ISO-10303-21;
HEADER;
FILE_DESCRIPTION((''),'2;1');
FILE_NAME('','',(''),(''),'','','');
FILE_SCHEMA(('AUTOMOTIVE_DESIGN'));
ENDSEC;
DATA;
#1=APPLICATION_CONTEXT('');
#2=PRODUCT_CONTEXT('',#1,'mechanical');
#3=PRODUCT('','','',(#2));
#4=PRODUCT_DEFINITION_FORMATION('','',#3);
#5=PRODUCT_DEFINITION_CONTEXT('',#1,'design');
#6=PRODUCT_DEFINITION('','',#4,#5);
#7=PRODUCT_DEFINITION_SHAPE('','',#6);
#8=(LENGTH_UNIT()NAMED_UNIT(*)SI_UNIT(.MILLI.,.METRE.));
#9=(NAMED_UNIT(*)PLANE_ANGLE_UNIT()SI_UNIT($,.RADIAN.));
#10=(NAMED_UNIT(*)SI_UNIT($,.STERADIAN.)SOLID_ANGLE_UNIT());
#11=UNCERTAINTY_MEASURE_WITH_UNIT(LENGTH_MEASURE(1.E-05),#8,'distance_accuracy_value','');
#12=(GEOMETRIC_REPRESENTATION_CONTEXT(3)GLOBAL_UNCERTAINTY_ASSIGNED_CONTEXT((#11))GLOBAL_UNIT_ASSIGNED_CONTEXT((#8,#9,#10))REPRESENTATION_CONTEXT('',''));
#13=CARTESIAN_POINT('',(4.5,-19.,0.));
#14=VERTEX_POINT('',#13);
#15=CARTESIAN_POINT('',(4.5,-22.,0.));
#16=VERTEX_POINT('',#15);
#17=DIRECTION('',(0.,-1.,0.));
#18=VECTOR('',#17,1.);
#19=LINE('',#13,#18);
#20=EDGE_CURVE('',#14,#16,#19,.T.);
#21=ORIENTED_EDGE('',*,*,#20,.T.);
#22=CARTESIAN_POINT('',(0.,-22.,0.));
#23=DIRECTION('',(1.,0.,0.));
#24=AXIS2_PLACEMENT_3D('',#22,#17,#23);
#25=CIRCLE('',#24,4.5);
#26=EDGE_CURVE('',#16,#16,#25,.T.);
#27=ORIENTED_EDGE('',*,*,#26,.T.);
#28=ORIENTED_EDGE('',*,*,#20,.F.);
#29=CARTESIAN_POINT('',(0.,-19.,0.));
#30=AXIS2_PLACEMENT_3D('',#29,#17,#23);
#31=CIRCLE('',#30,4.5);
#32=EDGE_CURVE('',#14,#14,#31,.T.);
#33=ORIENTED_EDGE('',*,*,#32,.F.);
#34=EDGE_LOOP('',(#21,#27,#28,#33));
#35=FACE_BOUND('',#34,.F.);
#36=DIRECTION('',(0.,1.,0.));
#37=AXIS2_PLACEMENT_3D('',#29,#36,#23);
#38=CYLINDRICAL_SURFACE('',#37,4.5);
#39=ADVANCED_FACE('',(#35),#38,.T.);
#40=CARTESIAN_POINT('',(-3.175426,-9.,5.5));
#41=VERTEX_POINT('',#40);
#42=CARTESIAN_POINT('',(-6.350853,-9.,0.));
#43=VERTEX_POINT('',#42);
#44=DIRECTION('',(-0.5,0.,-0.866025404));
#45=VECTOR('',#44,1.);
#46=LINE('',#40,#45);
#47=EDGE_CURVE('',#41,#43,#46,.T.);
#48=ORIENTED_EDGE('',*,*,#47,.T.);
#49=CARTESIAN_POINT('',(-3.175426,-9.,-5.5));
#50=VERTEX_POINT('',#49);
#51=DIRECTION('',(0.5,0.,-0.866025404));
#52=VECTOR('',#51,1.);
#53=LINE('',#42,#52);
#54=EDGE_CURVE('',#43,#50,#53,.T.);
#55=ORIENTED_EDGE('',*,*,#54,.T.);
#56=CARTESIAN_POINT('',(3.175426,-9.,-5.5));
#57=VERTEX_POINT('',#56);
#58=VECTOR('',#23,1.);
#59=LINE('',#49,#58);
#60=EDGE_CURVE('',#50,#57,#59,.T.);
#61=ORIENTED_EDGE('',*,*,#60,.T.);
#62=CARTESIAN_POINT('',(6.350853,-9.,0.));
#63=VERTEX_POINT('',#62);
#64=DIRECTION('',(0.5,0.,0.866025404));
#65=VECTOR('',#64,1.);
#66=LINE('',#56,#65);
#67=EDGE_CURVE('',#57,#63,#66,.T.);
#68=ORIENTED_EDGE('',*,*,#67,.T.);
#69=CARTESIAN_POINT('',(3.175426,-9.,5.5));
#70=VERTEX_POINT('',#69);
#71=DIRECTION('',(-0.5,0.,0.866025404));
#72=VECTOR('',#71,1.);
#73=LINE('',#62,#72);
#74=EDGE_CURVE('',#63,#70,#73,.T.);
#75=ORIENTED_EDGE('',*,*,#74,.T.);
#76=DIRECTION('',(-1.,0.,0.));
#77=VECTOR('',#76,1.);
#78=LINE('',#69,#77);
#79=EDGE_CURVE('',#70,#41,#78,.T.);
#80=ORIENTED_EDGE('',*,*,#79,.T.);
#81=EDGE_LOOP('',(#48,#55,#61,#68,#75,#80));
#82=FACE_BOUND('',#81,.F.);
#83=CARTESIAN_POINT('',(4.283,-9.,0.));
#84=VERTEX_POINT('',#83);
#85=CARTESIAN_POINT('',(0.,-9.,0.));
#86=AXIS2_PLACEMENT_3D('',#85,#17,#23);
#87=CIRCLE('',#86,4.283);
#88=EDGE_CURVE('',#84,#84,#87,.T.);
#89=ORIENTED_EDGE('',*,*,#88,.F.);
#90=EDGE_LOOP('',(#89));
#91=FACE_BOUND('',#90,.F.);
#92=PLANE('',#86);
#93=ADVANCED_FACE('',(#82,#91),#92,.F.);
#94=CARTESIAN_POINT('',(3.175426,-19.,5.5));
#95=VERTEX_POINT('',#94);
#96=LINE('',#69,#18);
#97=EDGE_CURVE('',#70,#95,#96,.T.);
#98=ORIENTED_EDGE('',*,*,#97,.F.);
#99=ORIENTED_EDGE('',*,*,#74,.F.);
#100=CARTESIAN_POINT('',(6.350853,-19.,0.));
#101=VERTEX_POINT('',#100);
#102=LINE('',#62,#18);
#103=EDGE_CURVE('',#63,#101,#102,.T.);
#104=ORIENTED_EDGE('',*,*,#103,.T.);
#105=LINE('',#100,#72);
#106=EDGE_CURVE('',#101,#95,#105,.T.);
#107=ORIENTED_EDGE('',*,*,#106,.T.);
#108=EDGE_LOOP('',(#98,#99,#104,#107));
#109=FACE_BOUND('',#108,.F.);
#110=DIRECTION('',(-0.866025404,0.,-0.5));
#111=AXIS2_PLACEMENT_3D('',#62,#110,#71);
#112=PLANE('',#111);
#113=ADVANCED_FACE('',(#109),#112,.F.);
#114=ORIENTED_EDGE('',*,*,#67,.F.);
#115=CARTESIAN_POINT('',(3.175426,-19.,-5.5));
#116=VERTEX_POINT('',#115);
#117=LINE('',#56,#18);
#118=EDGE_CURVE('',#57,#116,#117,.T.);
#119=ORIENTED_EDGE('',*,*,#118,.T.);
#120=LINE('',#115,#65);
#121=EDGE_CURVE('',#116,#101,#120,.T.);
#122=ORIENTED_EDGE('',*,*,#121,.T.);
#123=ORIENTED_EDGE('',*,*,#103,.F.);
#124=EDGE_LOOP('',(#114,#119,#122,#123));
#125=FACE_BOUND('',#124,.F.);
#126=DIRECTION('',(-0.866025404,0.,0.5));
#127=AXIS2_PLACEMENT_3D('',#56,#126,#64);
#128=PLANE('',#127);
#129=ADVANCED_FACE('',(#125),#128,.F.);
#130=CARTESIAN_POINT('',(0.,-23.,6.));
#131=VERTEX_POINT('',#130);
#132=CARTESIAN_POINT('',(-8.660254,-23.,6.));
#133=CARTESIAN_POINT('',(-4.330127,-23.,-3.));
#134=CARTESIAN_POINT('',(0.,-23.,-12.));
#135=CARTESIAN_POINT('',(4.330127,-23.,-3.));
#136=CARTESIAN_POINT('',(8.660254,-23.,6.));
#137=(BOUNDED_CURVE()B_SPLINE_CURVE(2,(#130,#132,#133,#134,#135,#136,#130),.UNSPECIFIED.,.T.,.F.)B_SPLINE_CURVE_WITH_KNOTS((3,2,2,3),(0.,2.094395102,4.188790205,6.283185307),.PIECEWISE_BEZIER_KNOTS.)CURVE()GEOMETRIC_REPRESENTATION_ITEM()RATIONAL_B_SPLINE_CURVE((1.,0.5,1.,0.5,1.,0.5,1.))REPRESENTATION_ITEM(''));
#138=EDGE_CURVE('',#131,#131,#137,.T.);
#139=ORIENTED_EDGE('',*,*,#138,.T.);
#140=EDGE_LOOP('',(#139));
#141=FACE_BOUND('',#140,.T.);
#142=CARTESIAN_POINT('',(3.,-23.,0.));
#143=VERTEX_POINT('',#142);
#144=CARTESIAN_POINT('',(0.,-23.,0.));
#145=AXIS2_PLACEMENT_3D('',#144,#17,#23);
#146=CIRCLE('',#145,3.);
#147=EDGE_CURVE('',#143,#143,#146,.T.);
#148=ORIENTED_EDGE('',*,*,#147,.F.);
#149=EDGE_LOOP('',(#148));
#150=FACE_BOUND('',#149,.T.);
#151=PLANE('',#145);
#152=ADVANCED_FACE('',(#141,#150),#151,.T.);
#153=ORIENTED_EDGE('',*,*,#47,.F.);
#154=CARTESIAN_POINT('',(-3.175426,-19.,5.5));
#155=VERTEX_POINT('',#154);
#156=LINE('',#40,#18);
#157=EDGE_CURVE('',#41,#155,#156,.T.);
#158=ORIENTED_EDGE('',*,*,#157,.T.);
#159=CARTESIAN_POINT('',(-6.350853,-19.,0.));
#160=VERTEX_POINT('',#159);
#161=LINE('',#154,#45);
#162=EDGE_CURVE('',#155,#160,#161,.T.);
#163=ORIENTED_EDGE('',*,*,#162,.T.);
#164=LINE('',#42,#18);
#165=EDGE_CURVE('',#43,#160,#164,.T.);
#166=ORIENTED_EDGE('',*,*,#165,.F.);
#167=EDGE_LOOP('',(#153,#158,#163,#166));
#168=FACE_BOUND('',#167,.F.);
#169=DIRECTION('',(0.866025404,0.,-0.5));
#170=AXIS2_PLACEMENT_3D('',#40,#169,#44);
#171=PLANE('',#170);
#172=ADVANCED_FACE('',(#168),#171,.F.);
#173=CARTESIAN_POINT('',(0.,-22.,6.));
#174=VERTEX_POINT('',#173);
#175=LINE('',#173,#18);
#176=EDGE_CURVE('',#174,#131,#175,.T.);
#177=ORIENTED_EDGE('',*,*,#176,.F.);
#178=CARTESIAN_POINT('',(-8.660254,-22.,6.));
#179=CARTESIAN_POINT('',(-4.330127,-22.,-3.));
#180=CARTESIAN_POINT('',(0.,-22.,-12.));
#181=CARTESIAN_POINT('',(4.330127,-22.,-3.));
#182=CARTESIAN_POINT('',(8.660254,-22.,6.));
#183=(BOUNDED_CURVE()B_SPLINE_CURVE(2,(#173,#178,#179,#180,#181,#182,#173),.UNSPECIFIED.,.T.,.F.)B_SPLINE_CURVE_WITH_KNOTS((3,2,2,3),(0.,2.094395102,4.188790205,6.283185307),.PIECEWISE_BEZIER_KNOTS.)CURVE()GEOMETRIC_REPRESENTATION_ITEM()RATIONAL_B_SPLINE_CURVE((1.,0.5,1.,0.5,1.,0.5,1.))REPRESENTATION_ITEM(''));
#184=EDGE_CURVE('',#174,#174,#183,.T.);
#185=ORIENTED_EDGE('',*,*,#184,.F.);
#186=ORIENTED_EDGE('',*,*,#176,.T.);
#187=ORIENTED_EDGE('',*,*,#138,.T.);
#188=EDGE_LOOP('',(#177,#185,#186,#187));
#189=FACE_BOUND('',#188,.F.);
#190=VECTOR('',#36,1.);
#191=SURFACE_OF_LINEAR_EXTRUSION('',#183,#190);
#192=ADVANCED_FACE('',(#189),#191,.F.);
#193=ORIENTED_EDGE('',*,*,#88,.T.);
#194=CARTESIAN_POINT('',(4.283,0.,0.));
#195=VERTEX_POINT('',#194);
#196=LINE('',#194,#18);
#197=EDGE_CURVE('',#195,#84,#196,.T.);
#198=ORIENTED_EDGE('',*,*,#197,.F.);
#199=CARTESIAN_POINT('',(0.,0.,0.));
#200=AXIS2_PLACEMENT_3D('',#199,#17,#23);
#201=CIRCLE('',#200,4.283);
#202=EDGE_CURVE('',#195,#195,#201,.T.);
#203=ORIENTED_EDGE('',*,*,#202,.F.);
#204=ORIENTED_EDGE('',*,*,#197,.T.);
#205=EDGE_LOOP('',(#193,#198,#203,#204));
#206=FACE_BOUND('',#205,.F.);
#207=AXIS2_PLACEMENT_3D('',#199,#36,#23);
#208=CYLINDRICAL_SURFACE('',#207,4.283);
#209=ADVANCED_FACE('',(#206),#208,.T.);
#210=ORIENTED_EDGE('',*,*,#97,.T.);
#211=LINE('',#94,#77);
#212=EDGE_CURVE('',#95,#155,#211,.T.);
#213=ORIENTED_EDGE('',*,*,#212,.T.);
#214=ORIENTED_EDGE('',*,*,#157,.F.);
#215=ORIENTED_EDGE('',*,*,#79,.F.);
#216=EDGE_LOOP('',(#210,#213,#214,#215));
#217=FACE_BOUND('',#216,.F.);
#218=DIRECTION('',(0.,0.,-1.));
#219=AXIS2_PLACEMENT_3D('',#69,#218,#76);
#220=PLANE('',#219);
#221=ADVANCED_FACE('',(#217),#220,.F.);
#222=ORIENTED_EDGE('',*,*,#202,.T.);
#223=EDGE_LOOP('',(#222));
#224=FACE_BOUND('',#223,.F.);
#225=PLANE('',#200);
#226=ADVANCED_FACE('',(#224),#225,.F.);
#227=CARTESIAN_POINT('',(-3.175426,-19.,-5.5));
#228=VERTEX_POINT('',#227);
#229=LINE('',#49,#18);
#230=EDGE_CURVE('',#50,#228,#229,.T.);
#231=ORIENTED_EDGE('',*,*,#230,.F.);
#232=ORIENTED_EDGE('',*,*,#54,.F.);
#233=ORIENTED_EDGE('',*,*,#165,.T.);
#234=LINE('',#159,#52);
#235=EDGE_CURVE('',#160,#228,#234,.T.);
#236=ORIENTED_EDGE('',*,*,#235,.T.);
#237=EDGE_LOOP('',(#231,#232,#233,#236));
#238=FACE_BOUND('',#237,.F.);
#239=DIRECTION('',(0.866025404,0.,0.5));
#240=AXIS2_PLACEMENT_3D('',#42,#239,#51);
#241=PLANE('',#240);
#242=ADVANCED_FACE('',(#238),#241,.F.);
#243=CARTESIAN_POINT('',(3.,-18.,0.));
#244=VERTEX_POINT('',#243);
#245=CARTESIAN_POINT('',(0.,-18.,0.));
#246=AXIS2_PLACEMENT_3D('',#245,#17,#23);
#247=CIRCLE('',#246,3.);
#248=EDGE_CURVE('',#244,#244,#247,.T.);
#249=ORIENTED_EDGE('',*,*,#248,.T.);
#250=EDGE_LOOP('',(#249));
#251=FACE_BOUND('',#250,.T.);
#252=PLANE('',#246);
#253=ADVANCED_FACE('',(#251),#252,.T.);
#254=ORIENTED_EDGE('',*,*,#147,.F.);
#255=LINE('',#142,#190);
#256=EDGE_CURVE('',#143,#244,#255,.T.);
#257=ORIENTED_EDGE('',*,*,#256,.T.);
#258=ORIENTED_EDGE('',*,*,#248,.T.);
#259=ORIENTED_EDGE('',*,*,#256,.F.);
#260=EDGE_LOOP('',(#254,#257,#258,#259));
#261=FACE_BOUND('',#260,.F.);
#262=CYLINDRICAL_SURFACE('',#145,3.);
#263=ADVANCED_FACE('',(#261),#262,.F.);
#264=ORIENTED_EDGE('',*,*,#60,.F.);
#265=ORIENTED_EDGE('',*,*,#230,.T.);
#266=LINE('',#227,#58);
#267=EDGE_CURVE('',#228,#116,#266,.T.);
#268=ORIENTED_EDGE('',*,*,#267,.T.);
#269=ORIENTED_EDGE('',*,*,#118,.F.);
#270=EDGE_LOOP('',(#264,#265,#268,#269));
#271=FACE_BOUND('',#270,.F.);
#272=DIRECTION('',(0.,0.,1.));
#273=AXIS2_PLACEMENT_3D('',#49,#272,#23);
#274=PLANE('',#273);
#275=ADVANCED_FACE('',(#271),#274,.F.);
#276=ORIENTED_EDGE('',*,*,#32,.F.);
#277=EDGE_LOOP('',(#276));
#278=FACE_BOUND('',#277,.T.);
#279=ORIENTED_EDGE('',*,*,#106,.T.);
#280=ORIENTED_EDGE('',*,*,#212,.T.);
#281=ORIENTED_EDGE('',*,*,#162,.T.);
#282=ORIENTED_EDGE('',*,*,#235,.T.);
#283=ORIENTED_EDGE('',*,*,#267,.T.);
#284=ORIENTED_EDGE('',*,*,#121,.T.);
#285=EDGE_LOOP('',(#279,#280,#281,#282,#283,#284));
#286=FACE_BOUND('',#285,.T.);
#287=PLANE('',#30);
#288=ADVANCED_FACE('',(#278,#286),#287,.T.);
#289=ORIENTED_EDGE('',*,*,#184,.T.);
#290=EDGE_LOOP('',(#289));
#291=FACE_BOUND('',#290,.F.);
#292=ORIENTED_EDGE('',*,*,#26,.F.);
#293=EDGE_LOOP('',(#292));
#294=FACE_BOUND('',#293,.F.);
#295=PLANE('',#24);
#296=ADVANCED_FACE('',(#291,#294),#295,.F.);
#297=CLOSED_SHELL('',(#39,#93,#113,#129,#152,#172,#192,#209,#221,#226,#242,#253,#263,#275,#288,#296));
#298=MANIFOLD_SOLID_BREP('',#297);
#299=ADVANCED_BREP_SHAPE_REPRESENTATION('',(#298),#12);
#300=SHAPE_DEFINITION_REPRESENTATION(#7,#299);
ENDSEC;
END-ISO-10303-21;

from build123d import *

# Parameters (mm, degrees)
F0_R     = 4.283
F1_DEPTH = 9
F2_R     = 4.283
F3_DEPTH = 10
F4_R     = 4.5
F5_DEPTH = 3
F7_DEPTH = 1
F8_R     = 3
F9_DEPTH = 5


# Not quite as in the source:
# - a feature names something its author has since deleted; it is built from what else it names


with BuildPart() as f1:
    # F0 (on Front) → F1 (new body)
    with BuildSketch(Plane.XZ):
        Circle(F0_R)
    extrude(amount=F1_DEPTH)

    # F2 (on face) → F3 (join)
    with BuildSketch(Plane.XZ.offset(9)):
        Polygon((3.1754264805, 5.5), (-3.1754264805, 5.5), (-6.3508529611, 0), (-3.1754264805, -5.5), (3.1754264805, -5.5), (6.3508529611, 0), align=None)
        Circle(F2_R, mode=Mode.SUBTRACT)
        Circle(F2_R)
    extrude(amount=F3_DEPTH)

    # F4 (on face) → F5 (join)
    with BuildSketch(Plane.XZ.offset(19)):
        Circle(F4_R)
    extrude(amount=F5_DEPTH)

    # F6 (on face) → F7 (join)
    with BuildSketch(Plane.XZ.offset(22)):
        with BuildLine():
            add(Edge.make_bspline(
                [(0, 6), (-8.6602540378, 6), (-4.3301270189, -3), (0, -12), (4.3301270189, -3), (8.6602540378, 6), (0, 6)],
                knots=[0, 0, 0, 2.0943951024, 2.0943951024, 4.1887902048, 4.1887902048, 6.2831853072, 6.2831853072, 6.2831853072], degree=2, weights=[1, 0.5, 1, 0.5, 1, 0.5, 1]))
        make_face()
    extrude(amount=F7_DEPTH)

    # F8 (on face) → F9 (cut)
    with BuildSketch(Plane.XZ.offset(23)):
        Circle(F8_R)
    extrude(amount=-F9_DEPTH, mode=Mode.SUBTRACT)


solid = f1.part
